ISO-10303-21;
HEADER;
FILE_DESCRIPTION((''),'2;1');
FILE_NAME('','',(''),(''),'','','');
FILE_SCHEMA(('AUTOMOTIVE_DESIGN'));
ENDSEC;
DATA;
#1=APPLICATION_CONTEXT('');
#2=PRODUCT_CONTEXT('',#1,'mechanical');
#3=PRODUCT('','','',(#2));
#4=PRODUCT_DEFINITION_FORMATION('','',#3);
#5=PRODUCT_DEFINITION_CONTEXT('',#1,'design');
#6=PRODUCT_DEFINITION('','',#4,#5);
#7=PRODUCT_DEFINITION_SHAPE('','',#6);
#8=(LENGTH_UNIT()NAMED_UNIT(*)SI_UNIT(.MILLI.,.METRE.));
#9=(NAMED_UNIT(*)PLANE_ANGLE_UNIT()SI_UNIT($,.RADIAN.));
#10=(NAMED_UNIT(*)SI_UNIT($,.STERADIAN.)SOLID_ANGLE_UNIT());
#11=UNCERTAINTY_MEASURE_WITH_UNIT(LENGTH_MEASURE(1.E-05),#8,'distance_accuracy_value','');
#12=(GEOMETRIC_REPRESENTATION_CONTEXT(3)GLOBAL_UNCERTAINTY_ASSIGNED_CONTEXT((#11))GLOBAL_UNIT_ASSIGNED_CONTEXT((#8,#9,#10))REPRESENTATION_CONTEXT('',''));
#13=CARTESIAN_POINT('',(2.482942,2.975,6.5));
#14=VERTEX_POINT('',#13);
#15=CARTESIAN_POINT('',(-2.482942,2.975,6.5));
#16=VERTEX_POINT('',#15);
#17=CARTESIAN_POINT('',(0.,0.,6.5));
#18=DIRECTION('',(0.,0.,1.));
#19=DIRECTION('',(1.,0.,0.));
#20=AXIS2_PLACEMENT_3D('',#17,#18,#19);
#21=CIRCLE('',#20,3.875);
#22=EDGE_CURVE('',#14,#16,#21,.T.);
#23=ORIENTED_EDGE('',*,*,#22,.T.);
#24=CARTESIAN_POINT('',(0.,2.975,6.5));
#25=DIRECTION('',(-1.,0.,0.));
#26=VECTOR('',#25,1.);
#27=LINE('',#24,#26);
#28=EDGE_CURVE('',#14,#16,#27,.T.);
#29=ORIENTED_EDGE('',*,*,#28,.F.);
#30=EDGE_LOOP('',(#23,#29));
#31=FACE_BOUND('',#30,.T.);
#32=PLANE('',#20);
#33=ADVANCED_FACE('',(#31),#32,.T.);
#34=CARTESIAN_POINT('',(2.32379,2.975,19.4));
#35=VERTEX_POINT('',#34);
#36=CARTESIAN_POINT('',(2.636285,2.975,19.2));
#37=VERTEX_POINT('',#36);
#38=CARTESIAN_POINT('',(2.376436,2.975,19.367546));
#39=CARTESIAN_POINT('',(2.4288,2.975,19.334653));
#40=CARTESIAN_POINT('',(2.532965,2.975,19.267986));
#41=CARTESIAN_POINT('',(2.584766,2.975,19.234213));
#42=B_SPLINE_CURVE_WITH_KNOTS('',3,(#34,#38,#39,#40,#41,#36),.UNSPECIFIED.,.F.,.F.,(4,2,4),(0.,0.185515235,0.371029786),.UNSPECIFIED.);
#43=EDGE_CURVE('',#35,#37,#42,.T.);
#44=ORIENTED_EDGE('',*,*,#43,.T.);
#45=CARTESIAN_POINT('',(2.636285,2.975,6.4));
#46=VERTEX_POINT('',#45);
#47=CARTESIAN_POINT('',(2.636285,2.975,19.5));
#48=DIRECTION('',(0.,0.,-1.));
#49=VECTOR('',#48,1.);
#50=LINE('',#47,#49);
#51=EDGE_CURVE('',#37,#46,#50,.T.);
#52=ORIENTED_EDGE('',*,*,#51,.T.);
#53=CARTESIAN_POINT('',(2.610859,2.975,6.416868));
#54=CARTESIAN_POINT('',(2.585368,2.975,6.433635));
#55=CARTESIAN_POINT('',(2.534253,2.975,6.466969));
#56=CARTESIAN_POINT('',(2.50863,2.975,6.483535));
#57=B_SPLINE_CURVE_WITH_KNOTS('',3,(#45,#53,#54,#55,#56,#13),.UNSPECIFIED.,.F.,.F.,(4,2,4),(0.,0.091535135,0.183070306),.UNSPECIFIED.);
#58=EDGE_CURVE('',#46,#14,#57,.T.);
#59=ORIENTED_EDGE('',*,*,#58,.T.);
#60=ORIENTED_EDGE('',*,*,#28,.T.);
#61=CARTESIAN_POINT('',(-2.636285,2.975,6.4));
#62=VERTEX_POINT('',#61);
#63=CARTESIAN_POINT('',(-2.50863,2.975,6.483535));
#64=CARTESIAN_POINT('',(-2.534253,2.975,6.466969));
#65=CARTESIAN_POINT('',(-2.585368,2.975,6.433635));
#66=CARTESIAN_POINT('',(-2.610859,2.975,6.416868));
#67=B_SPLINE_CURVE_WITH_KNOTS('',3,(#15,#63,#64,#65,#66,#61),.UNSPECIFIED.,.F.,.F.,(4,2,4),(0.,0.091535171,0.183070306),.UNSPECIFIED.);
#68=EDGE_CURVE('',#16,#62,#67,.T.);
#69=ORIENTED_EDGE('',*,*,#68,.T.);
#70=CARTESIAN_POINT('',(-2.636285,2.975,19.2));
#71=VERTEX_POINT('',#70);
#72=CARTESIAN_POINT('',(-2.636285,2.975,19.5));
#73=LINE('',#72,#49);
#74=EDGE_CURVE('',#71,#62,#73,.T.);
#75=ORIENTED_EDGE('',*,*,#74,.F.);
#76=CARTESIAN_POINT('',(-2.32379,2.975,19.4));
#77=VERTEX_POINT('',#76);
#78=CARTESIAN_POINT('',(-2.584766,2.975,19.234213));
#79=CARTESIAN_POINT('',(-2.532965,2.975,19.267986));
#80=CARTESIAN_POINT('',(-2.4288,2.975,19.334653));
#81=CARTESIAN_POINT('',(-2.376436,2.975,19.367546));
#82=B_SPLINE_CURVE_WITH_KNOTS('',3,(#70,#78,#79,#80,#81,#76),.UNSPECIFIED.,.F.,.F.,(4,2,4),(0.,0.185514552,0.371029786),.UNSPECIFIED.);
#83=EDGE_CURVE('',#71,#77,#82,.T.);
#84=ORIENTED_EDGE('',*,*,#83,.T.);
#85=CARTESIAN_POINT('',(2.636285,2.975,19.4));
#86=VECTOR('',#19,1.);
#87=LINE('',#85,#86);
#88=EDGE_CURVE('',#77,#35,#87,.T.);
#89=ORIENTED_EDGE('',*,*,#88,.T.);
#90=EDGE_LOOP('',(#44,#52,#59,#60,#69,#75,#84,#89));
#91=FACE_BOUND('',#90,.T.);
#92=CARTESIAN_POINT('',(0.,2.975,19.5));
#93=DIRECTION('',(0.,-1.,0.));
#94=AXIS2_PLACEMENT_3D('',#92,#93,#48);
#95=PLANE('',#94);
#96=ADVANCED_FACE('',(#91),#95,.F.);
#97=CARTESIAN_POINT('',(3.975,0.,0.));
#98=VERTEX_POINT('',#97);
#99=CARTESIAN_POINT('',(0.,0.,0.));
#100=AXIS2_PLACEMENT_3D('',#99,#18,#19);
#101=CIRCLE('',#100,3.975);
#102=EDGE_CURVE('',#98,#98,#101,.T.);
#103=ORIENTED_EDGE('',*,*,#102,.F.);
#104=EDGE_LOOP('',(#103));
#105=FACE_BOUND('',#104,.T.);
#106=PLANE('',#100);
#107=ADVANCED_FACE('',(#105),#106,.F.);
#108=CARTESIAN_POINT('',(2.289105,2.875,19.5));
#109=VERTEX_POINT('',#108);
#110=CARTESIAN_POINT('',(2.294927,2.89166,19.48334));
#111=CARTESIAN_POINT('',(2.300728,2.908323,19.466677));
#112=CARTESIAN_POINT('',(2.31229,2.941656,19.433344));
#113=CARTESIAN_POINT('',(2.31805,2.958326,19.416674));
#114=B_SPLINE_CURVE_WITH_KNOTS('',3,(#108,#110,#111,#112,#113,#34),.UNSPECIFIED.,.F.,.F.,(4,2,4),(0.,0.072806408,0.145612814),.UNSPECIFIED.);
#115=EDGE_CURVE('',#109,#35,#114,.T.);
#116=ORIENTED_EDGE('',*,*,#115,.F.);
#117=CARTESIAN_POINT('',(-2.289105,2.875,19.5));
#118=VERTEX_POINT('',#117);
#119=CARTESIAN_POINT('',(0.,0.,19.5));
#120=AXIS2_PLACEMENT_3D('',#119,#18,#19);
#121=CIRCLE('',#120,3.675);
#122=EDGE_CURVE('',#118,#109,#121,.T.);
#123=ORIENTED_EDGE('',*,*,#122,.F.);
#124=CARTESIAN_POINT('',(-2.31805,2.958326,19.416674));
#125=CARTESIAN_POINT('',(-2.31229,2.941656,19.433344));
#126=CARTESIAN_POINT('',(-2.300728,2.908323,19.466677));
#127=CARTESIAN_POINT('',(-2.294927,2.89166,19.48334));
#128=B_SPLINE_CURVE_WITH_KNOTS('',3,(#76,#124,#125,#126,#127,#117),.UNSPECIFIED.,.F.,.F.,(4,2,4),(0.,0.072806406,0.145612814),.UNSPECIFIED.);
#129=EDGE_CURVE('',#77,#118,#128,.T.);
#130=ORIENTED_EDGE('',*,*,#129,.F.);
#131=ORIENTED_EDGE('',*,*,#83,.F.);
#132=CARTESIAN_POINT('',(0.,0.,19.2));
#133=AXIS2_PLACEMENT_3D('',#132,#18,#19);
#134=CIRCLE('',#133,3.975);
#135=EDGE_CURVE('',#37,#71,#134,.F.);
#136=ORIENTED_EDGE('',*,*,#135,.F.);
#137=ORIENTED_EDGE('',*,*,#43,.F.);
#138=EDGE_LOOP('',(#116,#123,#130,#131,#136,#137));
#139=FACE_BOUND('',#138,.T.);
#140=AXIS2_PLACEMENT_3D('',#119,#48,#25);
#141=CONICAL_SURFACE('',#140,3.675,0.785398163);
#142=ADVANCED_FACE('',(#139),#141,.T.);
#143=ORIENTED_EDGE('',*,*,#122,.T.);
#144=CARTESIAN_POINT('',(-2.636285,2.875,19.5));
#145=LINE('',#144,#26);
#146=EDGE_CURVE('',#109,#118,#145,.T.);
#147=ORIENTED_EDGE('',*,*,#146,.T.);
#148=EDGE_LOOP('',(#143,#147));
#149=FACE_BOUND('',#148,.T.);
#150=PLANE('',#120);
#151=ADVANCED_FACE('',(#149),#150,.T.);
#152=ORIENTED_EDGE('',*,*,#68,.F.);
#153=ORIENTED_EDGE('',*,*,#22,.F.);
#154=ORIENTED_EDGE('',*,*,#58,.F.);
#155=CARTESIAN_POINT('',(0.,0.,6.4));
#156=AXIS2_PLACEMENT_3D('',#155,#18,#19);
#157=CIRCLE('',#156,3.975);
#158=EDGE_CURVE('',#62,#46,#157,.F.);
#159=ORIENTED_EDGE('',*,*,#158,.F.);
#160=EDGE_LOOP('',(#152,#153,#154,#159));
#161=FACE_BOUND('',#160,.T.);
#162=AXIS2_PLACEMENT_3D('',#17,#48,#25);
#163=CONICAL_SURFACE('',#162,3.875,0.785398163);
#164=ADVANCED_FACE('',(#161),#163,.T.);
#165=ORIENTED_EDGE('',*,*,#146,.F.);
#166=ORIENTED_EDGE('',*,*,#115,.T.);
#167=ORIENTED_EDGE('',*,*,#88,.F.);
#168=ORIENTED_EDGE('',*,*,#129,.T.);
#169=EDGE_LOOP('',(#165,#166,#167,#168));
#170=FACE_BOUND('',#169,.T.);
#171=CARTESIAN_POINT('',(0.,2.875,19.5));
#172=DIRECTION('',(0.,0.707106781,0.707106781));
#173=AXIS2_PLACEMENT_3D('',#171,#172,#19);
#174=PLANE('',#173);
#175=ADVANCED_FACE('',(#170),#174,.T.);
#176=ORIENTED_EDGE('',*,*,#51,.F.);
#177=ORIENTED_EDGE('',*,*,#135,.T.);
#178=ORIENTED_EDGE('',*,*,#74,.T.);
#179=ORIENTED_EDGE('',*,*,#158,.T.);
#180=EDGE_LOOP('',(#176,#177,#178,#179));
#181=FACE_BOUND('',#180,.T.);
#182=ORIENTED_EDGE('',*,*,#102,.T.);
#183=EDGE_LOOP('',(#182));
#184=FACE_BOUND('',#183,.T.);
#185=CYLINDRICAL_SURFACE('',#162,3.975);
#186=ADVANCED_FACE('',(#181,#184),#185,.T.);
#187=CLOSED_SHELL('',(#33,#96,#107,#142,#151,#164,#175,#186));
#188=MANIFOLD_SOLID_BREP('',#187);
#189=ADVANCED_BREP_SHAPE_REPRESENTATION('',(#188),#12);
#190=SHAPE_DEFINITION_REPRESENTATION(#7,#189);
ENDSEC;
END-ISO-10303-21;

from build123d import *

# Parameters (mm, degrees)
EXTRUDE_1_DEPTH = 6.5
EXTRUDE_START   = 6.5
EXTRUDE_2_DEPTH = 13
CHAMFER_9_SIZE  = 0.1
CHAMFER_1_SIZE  = 0.3


with BuildPart() as part:
    # ｽｹｯﾁ1 → ﾎﾞｽ - 押し出し1 (new body)
    with BuildSketch(Plane.XY):
        with BuildLine():
            ThreePointArc((0, 3.975), (-1.409787218, 3.71660127), (-2.636285265, 2.975))
            Line((-2.636285265, 2.975), (0, 2.975))
            Line((0, 2.975), (0, 3.975))
        make_face()
        with BuildLine():
            Line((0, 2.975), (-2.636285265, 2.975))
            ThreePointArc((-2.636285265, 2.975), (-3.71660127, -1.409787218), (0, -3.975))
            Line((0, -3.975), (0, 2.975))
        make_face()
        with BuildLine():
            Line((0, 3.975), (0, 2.975))
            Line((0, 2.975), (2.636285265, 2.975))
            ThreePointArc((2.636285265, 2.975), (1.409787218, 3.71660127), (0, 3.975))
        make_face()
        with BuildLine():
            Line((2.636285265, 2.975), (0, 2.975))
            Line((0, 2.975), (0, -3.975))
            ThreePointArc((0, -3.975), (2.810749455, -2.810749455), (3.975, 0))
            ThreePointArc((3.975, 0), (3.624904063, 1.631163859), (2.636285265, 2.975))
        make_face()
    extrude(amount=EXTRUDE_1_DEPTH)

    # ｽｹｯﾁ1<3> → ﾎﾞｽ - 押し出し2 (add)
    with BuildSketch(Plane.XY.offset(EXTRUDE_START)):
        with BuildLine():
            ThreePointArc((-2.636285265, 2.975), (0, -3.975), (2.636285265, 2.975))
            Line((2.636285265, 2.975), (-2.636285265, 2.975))
        make_face()
    extrude(amount=EXTRUDE_2_DEPTH)

    # 面取り9
    # the kernel refuses this chamfer: 0.1 mm, written as the material it takes off along each edge
    with BuildSketch(Plane(origin=(0, 0, 6.5), x_dir=(-0.7102313336903862, 0.7039683605421307, 0), z_dir=(-0.7039683605421307, -0.7102313336903862, 0))) as chamfer_9_piece_1_section:
        Polygon((3.975, CHAMFER_9_SIZE), (3.975 - CHAMFER_9_SIZE, 0), (3.975, 0), align=None)
    chamfer_9_piece_1 = revolve(axis=Axis((0, 0, 6.5), (0, 0, -1)), revolution_arc=90.507480781, mode=Mode.PRIVATE)
    chamfer_9_piece_1 = split(chamfer_9_piece_1, bisect_by=Plane(origin=(0, 2.975, 6.452222293), z_dir=(0, 1, 0)), keep=Keep.TOP, mode=Mode.PRIVATE)
    add(chamfer_9_piece_1, mode=Mode.SUBTRACT)
    with BuildSketch(Plane(origin=(2.893453564, 2.975, 19.5), x_dir=(0, 0.02749587661058671, -0.9996219169112966), z_dir=(-1, 0, 0))) as chamfer_9_piece_2:
        Polygon((CHAMFER_9_SIZE * 0.999621916911, CHAMFER_9_SIZE * 0.0274958766106), (-CHAMFER_9_SIZE * 0.0274958766106, CHAMFER_9_SIZE * 0.999621916911), (0, 0), align=None)
    extrude(amount=5.786907128, mode=Mode.SUBTRACT)

    # 面取り1
    chamfer_1_edges = [part.edges().sort_by_distance(p)[0] for p in [
        (0, -3.975, 19.5),
    ]]
    chamfer(chamfer_1_edges, length=CHAMFER_1_SIZE)


solid = part.part
